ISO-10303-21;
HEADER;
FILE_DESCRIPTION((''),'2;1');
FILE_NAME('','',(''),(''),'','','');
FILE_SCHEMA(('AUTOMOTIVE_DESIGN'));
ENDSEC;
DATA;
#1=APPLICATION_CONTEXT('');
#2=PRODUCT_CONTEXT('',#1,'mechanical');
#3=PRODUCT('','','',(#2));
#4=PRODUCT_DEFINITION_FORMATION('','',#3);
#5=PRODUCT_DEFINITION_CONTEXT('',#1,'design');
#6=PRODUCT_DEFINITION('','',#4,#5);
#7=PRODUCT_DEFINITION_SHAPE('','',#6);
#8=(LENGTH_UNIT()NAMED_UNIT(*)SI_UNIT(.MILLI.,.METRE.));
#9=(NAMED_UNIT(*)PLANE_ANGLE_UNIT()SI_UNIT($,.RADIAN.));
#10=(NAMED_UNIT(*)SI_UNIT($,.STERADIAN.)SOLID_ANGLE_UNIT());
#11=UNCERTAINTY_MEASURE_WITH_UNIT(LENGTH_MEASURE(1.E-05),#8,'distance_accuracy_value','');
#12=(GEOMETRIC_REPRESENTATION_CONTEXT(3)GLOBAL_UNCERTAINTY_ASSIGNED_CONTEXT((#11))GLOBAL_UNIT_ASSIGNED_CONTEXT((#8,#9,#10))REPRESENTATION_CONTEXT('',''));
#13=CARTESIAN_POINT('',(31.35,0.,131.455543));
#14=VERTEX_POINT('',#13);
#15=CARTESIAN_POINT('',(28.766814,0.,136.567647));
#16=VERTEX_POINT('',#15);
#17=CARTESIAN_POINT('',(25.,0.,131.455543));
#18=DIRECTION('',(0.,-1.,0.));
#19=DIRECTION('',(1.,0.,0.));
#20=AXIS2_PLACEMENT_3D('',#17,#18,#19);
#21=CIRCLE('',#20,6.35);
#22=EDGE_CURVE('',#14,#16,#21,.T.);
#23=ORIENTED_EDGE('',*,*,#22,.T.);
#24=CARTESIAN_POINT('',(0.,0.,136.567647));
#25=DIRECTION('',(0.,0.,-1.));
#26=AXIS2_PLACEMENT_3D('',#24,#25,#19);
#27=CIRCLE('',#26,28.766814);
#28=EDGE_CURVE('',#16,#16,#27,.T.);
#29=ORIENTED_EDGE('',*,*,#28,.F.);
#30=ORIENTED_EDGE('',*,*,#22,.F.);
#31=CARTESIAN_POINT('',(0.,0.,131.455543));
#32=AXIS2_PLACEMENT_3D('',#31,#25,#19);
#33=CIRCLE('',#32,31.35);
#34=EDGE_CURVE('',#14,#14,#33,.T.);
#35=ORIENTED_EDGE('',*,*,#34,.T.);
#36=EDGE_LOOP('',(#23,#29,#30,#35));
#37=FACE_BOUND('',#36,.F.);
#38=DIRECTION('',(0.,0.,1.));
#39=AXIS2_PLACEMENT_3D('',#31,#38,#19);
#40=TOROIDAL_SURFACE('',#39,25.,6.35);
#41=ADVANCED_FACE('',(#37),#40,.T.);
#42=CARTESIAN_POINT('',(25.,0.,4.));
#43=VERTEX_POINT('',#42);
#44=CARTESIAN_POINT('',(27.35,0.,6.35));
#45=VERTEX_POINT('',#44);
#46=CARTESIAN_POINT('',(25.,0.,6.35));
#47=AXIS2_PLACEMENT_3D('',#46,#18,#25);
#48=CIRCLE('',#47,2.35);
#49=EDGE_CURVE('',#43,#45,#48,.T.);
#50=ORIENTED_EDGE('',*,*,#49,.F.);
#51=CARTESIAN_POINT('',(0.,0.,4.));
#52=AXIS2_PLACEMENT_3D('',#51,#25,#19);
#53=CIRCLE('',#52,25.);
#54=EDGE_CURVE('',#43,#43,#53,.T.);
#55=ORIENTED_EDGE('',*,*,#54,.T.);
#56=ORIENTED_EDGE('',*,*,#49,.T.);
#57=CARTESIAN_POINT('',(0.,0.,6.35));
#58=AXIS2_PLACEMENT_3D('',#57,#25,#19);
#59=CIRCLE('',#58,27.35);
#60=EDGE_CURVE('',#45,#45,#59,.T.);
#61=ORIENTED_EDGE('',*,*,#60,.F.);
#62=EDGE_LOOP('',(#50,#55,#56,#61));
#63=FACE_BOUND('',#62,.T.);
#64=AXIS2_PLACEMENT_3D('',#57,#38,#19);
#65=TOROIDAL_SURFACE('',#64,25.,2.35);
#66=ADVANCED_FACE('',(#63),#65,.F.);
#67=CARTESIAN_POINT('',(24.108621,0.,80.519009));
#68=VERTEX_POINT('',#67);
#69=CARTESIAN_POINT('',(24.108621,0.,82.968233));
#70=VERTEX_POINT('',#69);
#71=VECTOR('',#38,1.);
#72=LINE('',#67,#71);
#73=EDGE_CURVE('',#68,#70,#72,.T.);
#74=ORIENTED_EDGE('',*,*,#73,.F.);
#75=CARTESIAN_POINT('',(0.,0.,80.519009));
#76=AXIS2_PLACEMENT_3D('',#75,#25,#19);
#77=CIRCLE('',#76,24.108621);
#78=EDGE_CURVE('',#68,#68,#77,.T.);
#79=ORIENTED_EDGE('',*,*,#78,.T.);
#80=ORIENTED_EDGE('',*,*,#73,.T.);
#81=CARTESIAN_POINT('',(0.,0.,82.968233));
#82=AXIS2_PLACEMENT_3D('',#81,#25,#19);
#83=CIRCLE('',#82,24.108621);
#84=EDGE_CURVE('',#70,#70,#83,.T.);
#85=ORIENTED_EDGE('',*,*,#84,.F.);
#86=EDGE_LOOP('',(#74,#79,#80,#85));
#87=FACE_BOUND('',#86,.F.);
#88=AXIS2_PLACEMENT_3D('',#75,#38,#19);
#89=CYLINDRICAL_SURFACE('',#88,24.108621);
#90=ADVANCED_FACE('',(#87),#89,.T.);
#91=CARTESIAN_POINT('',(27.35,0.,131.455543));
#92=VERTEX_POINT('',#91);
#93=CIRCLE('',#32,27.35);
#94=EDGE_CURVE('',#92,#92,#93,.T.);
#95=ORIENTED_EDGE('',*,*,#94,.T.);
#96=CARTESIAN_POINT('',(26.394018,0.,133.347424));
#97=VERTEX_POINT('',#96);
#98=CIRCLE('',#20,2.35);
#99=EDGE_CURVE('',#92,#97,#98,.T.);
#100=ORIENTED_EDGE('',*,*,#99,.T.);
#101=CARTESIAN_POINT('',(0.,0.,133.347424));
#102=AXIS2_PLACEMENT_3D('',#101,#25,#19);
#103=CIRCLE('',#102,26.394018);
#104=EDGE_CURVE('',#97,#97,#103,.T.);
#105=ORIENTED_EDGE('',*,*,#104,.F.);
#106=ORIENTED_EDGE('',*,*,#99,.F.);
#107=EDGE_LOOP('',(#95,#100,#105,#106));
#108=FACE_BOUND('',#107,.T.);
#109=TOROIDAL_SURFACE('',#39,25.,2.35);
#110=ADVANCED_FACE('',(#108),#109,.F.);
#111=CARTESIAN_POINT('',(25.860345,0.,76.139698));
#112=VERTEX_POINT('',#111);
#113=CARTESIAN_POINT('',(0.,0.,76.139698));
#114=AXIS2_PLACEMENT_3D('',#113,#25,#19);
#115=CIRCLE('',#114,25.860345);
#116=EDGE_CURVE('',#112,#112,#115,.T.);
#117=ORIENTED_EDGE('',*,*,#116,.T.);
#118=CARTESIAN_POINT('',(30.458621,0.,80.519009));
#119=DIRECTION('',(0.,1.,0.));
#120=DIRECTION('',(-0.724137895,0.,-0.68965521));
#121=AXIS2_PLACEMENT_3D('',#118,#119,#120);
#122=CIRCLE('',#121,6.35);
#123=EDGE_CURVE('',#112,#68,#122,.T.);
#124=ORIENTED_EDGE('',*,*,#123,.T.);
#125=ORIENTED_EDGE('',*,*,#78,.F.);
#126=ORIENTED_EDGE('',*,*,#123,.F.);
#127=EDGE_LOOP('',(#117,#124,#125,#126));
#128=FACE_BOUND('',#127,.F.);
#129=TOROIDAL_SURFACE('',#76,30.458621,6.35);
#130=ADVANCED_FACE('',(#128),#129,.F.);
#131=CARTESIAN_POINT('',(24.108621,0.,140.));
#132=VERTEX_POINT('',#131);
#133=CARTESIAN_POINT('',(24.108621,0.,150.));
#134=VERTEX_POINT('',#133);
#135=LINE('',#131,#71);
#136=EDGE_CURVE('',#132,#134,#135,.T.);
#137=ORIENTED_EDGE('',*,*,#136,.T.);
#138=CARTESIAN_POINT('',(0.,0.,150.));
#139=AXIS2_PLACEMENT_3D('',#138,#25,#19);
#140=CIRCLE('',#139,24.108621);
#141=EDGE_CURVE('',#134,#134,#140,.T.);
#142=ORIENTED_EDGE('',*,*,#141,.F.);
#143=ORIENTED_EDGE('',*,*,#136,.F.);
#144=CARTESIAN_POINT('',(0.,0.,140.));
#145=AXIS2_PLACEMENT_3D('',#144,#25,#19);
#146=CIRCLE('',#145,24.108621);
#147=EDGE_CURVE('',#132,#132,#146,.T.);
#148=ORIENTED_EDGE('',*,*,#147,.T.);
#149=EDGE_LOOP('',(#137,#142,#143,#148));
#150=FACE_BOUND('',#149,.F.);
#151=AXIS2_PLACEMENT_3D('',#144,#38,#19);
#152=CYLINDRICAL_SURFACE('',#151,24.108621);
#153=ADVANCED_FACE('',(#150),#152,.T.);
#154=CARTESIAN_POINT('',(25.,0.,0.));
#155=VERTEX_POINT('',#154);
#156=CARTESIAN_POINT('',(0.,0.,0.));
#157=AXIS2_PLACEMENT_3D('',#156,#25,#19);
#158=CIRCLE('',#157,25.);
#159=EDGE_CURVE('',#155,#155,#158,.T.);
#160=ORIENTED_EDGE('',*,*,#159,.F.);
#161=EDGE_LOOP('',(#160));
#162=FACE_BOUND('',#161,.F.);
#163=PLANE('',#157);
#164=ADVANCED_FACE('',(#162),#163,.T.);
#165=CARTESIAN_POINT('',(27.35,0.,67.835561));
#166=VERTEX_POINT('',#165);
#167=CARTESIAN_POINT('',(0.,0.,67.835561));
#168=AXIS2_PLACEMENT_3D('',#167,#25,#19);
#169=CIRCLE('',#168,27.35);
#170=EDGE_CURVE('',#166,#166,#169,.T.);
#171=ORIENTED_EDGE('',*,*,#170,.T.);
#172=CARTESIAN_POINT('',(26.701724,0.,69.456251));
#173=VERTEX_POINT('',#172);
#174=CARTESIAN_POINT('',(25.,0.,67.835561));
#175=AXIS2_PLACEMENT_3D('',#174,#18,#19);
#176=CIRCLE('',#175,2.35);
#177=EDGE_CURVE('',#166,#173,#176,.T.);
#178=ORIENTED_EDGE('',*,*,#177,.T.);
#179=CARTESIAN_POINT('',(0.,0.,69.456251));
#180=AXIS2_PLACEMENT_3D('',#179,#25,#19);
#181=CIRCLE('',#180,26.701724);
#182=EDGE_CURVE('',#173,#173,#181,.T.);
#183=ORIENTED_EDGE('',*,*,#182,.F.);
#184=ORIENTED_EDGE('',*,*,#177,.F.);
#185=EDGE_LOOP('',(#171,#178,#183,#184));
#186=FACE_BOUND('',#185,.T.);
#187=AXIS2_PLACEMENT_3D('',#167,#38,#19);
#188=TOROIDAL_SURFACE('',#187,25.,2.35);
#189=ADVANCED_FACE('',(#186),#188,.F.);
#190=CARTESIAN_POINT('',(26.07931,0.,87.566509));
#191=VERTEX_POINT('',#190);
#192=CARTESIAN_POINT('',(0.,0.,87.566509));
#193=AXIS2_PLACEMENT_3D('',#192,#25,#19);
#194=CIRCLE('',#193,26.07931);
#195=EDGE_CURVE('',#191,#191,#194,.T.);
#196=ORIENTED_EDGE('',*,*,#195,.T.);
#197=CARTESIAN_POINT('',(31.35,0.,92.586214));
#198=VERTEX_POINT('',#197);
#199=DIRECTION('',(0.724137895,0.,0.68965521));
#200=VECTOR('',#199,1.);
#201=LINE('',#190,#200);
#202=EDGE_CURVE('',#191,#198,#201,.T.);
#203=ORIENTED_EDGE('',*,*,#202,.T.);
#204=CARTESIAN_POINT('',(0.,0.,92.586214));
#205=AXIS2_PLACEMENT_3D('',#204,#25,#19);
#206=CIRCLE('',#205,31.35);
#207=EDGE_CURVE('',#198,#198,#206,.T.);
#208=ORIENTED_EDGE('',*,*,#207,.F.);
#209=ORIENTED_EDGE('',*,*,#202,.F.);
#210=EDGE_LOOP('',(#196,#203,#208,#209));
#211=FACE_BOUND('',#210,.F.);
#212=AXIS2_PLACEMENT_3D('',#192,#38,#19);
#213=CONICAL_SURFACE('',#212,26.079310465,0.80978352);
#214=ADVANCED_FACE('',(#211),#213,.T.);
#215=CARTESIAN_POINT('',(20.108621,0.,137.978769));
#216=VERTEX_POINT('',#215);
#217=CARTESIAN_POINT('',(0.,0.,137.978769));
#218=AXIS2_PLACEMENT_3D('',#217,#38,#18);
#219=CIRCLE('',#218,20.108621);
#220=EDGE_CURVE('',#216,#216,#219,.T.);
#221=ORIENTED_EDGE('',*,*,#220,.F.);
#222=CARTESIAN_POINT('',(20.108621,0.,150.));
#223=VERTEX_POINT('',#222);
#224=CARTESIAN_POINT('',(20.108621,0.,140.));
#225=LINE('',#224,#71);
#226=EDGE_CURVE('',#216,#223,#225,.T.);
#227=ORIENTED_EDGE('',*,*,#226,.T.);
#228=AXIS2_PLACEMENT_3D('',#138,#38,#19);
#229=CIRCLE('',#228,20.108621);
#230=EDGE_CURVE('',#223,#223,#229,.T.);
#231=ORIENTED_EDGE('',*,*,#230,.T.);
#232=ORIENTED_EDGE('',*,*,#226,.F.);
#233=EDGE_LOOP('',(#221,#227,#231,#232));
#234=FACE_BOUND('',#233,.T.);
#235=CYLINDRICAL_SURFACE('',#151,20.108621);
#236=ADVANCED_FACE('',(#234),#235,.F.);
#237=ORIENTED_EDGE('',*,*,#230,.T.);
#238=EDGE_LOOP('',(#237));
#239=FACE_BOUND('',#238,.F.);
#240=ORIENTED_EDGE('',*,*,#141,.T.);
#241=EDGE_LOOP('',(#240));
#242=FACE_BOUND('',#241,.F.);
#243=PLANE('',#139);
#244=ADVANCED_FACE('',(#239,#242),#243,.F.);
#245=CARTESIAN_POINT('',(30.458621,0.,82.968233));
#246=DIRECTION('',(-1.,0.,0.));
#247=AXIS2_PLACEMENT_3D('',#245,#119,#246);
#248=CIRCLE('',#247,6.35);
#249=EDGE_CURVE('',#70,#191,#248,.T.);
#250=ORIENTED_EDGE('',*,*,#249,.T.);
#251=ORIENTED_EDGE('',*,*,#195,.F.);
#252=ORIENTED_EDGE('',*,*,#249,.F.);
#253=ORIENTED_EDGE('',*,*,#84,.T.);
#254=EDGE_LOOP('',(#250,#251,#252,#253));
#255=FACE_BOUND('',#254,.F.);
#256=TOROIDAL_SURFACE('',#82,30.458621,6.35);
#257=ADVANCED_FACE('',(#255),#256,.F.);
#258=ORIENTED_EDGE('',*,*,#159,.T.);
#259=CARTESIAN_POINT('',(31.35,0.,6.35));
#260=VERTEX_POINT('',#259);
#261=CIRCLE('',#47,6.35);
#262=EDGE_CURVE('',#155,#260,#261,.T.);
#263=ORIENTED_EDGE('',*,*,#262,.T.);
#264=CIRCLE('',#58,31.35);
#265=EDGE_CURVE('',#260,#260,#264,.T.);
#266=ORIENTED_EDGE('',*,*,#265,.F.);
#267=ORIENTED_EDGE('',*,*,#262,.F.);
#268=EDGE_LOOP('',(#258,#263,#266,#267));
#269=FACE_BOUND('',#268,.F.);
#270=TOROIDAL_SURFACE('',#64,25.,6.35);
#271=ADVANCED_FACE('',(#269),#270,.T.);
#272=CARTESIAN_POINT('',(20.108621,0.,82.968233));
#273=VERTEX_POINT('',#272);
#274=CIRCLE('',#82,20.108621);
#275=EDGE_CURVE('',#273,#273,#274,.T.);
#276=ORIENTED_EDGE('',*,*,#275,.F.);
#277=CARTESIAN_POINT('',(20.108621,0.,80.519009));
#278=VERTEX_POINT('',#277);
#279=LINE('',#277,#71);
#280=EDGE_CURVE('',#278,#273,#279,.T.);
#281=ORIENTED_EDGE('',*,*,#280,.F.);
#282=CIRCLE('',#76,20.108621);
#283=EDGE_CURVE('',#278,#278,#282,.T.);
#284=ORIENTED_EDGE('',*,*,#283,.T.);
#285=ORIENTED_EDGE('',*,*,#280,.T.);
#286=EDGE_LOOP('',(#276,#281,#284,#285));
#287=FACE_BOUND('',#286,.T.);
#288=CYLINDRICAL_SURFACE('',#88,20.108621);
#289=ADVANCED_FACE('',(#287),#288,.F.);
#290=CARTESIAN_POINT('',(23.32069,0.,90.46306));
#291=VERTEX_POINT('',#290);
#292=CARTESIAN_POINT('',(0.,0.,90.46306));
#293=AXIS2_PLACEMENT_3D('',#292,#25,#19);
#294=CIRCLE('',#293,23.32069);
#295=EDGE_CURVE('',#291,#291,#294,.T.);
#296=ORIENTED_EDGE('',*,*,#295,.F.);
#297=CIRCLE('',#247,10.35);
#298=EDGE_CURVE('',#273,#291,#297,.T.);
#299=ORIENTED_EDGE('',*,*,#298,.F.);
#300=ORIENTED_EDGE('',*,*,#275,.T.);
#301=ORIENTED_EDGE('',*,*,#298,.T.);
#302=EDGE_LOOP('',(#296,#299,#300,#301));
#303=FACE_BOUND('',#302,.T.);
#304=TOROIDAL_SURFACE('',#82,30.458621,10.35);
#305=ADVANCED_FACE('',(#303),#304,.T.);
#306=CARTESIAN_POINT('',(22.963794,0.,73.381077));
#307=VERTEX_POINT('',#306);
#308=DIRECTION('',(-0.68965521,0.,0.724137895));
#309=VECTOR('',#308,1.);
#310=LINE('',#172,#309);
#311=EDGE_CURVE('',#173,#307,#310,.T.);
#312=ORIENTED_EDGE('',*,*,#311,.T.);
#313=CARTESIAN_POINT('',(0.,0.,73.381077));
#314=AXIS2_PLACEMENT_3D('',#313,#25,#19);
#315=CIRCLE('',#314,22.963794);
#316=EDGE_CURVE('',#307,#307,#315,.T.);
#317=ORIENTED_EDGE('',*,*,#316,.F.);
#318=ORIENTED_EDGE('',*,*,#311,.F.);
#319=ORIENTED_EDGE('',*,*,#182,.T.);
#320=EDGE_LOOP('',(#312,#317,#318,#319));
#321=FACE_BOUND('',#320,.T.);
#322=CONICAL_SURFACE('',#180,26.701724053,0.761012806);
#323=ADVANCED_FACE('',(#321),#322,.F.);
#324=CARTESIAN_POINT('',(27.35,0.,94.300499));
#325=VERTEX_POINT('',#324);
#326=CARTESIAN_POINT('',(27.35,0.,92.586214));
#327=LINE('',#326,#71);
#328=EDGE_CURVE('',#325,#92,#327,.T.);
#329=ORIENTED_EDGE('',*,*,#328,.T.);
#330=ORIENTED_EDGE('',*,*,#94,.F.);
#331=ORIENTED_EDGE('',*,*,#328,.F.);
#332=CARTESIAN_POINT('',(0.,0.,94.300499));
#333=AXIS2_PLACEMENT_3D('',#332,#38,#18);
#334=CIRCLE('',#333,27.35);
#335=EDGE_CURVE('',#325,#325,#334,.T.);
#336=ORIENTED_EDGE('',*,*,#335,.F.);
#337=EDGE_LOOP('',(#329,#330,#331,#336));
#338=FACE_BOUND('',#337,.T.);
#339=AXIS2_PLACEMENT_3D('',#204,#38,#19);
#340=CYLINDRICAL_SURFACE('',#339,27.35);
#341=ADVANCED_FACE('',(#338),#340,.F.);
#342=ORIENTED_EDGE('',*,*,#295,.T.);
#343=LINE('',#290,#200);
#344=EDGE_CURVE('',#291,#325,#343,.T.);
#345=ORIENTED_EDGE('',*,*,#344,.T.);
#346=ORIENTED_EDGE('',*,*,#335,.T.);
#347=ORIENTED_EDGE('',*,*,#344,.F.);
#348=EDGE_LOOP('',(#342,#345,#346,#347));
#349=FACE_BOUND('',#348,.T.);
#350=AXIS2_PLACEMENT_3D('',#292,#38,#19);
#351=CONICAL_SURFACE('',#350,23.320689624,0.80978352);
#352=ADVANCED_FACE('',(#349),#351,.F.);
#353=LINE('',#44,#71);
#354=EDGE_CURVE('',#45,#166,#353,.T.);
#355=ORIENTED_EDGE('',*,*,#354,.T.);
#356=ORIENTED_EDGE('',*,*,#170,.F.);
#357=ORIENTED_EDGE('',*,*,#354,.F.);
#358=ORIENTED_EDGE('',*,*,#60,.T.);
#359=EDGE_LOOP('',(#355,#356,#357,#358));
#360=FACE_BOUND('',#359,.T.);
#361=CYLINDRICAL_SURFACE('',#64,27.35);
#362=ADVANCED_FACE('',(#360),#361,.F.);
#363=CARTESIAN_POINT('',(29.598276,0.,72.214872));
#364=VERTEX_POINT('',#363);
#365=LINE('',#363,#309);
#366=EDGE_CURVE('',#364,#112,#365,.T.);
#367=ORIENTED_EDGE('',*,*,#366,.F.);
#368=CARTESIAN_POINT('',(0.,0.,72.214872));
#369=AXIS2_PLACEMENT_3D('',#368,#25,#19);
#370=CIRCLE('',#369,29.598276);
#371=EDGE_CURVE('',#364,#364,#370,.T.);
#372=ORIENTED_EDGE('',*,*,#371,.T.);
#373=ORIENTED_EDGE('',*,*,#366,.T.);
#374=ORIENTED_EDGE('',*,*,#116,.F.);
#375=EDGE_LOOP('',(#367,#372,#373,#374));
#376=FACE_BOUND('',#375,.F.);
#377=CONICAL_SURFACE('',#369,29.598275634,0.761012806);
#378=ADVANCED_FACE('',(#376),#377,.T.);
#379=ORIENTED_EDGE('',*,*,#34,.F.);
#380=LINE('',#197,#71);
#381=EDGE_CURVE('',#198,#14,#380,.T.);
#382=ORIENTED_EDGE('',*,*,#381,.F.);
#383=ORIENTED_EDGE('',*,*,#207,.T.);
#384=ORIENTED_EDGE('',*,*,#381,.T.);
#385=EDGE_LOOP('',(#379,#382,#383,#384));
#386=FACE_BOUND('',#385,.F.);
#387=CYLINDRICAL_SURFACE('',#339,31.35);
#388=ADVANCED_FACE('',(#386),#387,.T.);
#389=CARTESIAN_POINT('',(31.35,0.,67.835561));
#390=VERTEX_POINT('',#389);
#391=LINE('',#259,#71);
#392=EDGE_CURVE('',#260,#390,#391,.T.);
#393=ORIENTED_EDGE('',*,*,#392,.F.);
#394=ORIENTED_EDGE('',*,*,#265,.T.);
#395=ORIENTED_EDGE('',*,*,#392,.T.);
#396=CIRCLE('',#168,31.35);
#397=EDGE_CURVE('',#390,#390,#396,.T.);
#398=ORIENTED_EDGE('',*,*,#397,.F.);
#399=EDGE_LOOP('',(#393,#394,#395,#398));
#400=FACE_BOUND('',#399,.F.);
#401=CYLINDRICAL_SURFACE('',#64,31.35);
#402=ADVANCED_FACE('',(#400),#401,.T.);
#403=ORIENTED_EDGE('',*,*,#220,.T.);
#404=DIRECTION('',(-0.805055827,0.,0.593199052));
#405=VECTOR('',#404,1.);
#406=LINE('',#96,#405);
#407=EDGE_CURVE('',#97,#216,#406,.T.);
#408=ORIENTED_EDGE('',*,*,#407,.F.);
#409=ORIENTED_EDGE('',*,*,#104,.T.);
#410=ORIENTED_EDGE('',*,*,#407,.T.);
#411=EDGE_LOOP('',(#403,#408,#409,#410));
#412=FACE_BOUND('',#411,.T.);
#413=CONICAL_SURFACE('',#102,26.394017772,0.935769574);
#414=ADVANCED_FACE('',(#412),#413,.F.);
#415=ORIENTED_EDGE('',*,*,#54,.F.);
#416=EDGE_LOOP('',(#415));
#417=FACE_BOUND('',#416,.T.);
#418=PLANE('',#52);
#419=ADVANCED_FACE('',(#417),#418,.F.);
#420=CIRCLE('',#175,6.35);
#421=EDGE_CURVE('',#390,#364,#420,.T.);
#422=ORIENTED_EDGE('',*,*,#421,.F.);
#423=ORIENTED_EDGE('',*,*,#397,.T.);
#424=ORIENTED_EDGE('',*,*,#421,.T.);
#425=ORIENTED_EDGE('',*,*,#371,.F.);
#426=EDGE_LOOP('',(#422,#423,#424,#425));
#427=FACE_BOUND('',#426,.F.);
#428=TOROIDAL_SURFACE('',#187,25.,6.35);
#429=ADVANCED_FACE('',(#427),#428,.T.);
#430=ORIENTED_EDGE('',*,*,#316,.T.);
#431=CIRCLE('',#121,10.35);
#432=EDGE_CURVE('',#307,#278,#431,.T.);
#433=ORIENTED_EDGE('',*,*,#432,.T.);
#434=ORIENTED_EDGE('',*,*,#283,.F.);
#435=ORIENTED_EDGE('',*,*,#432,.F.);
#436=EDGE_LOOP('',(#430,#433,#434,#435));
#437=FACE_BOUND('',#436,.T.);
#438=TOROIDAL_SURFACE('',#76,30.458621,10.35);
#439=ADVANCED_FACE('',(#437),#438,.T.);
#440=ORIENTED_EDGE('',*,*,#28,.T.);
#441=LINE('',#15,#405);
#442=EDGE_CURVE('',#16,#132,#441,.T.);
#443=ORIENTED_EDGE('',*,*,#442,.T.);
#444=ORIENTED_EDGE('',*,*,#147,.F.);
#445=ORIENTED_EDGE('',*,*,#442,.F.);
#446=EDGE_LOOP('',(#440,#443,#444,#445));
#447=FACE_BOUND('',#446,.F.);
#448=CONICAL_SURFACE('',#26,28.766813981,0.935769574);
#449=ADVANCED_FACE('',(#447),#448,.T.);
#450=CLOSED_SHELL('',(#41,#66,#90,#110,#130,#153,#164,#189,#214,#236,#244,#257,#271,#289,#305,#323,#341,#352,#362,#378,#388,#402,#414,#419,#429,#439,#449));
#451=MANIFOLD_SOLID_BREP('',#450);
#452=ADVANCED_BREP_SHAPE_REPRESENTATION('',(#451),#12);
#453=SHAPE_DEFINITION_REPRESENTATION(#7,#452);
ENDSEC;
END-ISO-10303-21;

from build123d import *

# Parameters (mm, degrees)
F2_T = -4


with BuildPart() as f1:
    # F0 (on Front) → F1 (revolve)
    with BuildSketch(Plane.XZ):
        with BuildLine():
            Line((0, 150), (0, 0))
            Line((0, 0), (25, 0))
            ThreePointArc((25, 0), (29.4901280605, 1.8598719395), (31.35, 6.35))
            Line((31.35, 6.35), (31.35, 67.835561348))
            ThreePointArc((31.35, 67.835561348), (30.8958269257, 70.1938922964), (29.5982756339, 72.2148719324))
            Line((29.5982756339, 72.2148719324), (25.8603454151, 76.1396982527))
            ThreePointArc((25.8603454151, 76.1396982527), (24.5627941233, 78.1606778887), (24.108621049, 80.5190088371))
            Line((24.108621049, 80.5190088371), (24.108621049, 82.9682330581))
            ThreePointArc((24.108621049, 82.9682330581), (24.6220500432, 85.469620452), (26.0793104646, 87.566508692))
            Line((26.0793104646, 87.566508692), (31.35, 92.5862135351))
            Line((31.35, 92.5862135351), (31.35, 131.4555426863))
            ThreePointArc((31.35, 131.4555426863), (30.6675289492, 134.3193889828), (28.766813981, 136.5676471876))
            Line((28.766813981, 136.5676471876), (24.108621049, 140))
            Line((24.108621049, 140), (24.108621049, 150))
            Line((24.108621049, 150), (0, 150))
        make_face()
    revolve(axis=Axis((0, 0, 75), (0, 0, -1)))

    # F2
    f2_openings = [f1.faces().sort_by_distance(p)[0] for p in [
        (0, 0, 150),
    ]]
    offset(amount=F2_T, openings=f2_openings, kind=Kind.INTERSECTION)


solid = f1.part
